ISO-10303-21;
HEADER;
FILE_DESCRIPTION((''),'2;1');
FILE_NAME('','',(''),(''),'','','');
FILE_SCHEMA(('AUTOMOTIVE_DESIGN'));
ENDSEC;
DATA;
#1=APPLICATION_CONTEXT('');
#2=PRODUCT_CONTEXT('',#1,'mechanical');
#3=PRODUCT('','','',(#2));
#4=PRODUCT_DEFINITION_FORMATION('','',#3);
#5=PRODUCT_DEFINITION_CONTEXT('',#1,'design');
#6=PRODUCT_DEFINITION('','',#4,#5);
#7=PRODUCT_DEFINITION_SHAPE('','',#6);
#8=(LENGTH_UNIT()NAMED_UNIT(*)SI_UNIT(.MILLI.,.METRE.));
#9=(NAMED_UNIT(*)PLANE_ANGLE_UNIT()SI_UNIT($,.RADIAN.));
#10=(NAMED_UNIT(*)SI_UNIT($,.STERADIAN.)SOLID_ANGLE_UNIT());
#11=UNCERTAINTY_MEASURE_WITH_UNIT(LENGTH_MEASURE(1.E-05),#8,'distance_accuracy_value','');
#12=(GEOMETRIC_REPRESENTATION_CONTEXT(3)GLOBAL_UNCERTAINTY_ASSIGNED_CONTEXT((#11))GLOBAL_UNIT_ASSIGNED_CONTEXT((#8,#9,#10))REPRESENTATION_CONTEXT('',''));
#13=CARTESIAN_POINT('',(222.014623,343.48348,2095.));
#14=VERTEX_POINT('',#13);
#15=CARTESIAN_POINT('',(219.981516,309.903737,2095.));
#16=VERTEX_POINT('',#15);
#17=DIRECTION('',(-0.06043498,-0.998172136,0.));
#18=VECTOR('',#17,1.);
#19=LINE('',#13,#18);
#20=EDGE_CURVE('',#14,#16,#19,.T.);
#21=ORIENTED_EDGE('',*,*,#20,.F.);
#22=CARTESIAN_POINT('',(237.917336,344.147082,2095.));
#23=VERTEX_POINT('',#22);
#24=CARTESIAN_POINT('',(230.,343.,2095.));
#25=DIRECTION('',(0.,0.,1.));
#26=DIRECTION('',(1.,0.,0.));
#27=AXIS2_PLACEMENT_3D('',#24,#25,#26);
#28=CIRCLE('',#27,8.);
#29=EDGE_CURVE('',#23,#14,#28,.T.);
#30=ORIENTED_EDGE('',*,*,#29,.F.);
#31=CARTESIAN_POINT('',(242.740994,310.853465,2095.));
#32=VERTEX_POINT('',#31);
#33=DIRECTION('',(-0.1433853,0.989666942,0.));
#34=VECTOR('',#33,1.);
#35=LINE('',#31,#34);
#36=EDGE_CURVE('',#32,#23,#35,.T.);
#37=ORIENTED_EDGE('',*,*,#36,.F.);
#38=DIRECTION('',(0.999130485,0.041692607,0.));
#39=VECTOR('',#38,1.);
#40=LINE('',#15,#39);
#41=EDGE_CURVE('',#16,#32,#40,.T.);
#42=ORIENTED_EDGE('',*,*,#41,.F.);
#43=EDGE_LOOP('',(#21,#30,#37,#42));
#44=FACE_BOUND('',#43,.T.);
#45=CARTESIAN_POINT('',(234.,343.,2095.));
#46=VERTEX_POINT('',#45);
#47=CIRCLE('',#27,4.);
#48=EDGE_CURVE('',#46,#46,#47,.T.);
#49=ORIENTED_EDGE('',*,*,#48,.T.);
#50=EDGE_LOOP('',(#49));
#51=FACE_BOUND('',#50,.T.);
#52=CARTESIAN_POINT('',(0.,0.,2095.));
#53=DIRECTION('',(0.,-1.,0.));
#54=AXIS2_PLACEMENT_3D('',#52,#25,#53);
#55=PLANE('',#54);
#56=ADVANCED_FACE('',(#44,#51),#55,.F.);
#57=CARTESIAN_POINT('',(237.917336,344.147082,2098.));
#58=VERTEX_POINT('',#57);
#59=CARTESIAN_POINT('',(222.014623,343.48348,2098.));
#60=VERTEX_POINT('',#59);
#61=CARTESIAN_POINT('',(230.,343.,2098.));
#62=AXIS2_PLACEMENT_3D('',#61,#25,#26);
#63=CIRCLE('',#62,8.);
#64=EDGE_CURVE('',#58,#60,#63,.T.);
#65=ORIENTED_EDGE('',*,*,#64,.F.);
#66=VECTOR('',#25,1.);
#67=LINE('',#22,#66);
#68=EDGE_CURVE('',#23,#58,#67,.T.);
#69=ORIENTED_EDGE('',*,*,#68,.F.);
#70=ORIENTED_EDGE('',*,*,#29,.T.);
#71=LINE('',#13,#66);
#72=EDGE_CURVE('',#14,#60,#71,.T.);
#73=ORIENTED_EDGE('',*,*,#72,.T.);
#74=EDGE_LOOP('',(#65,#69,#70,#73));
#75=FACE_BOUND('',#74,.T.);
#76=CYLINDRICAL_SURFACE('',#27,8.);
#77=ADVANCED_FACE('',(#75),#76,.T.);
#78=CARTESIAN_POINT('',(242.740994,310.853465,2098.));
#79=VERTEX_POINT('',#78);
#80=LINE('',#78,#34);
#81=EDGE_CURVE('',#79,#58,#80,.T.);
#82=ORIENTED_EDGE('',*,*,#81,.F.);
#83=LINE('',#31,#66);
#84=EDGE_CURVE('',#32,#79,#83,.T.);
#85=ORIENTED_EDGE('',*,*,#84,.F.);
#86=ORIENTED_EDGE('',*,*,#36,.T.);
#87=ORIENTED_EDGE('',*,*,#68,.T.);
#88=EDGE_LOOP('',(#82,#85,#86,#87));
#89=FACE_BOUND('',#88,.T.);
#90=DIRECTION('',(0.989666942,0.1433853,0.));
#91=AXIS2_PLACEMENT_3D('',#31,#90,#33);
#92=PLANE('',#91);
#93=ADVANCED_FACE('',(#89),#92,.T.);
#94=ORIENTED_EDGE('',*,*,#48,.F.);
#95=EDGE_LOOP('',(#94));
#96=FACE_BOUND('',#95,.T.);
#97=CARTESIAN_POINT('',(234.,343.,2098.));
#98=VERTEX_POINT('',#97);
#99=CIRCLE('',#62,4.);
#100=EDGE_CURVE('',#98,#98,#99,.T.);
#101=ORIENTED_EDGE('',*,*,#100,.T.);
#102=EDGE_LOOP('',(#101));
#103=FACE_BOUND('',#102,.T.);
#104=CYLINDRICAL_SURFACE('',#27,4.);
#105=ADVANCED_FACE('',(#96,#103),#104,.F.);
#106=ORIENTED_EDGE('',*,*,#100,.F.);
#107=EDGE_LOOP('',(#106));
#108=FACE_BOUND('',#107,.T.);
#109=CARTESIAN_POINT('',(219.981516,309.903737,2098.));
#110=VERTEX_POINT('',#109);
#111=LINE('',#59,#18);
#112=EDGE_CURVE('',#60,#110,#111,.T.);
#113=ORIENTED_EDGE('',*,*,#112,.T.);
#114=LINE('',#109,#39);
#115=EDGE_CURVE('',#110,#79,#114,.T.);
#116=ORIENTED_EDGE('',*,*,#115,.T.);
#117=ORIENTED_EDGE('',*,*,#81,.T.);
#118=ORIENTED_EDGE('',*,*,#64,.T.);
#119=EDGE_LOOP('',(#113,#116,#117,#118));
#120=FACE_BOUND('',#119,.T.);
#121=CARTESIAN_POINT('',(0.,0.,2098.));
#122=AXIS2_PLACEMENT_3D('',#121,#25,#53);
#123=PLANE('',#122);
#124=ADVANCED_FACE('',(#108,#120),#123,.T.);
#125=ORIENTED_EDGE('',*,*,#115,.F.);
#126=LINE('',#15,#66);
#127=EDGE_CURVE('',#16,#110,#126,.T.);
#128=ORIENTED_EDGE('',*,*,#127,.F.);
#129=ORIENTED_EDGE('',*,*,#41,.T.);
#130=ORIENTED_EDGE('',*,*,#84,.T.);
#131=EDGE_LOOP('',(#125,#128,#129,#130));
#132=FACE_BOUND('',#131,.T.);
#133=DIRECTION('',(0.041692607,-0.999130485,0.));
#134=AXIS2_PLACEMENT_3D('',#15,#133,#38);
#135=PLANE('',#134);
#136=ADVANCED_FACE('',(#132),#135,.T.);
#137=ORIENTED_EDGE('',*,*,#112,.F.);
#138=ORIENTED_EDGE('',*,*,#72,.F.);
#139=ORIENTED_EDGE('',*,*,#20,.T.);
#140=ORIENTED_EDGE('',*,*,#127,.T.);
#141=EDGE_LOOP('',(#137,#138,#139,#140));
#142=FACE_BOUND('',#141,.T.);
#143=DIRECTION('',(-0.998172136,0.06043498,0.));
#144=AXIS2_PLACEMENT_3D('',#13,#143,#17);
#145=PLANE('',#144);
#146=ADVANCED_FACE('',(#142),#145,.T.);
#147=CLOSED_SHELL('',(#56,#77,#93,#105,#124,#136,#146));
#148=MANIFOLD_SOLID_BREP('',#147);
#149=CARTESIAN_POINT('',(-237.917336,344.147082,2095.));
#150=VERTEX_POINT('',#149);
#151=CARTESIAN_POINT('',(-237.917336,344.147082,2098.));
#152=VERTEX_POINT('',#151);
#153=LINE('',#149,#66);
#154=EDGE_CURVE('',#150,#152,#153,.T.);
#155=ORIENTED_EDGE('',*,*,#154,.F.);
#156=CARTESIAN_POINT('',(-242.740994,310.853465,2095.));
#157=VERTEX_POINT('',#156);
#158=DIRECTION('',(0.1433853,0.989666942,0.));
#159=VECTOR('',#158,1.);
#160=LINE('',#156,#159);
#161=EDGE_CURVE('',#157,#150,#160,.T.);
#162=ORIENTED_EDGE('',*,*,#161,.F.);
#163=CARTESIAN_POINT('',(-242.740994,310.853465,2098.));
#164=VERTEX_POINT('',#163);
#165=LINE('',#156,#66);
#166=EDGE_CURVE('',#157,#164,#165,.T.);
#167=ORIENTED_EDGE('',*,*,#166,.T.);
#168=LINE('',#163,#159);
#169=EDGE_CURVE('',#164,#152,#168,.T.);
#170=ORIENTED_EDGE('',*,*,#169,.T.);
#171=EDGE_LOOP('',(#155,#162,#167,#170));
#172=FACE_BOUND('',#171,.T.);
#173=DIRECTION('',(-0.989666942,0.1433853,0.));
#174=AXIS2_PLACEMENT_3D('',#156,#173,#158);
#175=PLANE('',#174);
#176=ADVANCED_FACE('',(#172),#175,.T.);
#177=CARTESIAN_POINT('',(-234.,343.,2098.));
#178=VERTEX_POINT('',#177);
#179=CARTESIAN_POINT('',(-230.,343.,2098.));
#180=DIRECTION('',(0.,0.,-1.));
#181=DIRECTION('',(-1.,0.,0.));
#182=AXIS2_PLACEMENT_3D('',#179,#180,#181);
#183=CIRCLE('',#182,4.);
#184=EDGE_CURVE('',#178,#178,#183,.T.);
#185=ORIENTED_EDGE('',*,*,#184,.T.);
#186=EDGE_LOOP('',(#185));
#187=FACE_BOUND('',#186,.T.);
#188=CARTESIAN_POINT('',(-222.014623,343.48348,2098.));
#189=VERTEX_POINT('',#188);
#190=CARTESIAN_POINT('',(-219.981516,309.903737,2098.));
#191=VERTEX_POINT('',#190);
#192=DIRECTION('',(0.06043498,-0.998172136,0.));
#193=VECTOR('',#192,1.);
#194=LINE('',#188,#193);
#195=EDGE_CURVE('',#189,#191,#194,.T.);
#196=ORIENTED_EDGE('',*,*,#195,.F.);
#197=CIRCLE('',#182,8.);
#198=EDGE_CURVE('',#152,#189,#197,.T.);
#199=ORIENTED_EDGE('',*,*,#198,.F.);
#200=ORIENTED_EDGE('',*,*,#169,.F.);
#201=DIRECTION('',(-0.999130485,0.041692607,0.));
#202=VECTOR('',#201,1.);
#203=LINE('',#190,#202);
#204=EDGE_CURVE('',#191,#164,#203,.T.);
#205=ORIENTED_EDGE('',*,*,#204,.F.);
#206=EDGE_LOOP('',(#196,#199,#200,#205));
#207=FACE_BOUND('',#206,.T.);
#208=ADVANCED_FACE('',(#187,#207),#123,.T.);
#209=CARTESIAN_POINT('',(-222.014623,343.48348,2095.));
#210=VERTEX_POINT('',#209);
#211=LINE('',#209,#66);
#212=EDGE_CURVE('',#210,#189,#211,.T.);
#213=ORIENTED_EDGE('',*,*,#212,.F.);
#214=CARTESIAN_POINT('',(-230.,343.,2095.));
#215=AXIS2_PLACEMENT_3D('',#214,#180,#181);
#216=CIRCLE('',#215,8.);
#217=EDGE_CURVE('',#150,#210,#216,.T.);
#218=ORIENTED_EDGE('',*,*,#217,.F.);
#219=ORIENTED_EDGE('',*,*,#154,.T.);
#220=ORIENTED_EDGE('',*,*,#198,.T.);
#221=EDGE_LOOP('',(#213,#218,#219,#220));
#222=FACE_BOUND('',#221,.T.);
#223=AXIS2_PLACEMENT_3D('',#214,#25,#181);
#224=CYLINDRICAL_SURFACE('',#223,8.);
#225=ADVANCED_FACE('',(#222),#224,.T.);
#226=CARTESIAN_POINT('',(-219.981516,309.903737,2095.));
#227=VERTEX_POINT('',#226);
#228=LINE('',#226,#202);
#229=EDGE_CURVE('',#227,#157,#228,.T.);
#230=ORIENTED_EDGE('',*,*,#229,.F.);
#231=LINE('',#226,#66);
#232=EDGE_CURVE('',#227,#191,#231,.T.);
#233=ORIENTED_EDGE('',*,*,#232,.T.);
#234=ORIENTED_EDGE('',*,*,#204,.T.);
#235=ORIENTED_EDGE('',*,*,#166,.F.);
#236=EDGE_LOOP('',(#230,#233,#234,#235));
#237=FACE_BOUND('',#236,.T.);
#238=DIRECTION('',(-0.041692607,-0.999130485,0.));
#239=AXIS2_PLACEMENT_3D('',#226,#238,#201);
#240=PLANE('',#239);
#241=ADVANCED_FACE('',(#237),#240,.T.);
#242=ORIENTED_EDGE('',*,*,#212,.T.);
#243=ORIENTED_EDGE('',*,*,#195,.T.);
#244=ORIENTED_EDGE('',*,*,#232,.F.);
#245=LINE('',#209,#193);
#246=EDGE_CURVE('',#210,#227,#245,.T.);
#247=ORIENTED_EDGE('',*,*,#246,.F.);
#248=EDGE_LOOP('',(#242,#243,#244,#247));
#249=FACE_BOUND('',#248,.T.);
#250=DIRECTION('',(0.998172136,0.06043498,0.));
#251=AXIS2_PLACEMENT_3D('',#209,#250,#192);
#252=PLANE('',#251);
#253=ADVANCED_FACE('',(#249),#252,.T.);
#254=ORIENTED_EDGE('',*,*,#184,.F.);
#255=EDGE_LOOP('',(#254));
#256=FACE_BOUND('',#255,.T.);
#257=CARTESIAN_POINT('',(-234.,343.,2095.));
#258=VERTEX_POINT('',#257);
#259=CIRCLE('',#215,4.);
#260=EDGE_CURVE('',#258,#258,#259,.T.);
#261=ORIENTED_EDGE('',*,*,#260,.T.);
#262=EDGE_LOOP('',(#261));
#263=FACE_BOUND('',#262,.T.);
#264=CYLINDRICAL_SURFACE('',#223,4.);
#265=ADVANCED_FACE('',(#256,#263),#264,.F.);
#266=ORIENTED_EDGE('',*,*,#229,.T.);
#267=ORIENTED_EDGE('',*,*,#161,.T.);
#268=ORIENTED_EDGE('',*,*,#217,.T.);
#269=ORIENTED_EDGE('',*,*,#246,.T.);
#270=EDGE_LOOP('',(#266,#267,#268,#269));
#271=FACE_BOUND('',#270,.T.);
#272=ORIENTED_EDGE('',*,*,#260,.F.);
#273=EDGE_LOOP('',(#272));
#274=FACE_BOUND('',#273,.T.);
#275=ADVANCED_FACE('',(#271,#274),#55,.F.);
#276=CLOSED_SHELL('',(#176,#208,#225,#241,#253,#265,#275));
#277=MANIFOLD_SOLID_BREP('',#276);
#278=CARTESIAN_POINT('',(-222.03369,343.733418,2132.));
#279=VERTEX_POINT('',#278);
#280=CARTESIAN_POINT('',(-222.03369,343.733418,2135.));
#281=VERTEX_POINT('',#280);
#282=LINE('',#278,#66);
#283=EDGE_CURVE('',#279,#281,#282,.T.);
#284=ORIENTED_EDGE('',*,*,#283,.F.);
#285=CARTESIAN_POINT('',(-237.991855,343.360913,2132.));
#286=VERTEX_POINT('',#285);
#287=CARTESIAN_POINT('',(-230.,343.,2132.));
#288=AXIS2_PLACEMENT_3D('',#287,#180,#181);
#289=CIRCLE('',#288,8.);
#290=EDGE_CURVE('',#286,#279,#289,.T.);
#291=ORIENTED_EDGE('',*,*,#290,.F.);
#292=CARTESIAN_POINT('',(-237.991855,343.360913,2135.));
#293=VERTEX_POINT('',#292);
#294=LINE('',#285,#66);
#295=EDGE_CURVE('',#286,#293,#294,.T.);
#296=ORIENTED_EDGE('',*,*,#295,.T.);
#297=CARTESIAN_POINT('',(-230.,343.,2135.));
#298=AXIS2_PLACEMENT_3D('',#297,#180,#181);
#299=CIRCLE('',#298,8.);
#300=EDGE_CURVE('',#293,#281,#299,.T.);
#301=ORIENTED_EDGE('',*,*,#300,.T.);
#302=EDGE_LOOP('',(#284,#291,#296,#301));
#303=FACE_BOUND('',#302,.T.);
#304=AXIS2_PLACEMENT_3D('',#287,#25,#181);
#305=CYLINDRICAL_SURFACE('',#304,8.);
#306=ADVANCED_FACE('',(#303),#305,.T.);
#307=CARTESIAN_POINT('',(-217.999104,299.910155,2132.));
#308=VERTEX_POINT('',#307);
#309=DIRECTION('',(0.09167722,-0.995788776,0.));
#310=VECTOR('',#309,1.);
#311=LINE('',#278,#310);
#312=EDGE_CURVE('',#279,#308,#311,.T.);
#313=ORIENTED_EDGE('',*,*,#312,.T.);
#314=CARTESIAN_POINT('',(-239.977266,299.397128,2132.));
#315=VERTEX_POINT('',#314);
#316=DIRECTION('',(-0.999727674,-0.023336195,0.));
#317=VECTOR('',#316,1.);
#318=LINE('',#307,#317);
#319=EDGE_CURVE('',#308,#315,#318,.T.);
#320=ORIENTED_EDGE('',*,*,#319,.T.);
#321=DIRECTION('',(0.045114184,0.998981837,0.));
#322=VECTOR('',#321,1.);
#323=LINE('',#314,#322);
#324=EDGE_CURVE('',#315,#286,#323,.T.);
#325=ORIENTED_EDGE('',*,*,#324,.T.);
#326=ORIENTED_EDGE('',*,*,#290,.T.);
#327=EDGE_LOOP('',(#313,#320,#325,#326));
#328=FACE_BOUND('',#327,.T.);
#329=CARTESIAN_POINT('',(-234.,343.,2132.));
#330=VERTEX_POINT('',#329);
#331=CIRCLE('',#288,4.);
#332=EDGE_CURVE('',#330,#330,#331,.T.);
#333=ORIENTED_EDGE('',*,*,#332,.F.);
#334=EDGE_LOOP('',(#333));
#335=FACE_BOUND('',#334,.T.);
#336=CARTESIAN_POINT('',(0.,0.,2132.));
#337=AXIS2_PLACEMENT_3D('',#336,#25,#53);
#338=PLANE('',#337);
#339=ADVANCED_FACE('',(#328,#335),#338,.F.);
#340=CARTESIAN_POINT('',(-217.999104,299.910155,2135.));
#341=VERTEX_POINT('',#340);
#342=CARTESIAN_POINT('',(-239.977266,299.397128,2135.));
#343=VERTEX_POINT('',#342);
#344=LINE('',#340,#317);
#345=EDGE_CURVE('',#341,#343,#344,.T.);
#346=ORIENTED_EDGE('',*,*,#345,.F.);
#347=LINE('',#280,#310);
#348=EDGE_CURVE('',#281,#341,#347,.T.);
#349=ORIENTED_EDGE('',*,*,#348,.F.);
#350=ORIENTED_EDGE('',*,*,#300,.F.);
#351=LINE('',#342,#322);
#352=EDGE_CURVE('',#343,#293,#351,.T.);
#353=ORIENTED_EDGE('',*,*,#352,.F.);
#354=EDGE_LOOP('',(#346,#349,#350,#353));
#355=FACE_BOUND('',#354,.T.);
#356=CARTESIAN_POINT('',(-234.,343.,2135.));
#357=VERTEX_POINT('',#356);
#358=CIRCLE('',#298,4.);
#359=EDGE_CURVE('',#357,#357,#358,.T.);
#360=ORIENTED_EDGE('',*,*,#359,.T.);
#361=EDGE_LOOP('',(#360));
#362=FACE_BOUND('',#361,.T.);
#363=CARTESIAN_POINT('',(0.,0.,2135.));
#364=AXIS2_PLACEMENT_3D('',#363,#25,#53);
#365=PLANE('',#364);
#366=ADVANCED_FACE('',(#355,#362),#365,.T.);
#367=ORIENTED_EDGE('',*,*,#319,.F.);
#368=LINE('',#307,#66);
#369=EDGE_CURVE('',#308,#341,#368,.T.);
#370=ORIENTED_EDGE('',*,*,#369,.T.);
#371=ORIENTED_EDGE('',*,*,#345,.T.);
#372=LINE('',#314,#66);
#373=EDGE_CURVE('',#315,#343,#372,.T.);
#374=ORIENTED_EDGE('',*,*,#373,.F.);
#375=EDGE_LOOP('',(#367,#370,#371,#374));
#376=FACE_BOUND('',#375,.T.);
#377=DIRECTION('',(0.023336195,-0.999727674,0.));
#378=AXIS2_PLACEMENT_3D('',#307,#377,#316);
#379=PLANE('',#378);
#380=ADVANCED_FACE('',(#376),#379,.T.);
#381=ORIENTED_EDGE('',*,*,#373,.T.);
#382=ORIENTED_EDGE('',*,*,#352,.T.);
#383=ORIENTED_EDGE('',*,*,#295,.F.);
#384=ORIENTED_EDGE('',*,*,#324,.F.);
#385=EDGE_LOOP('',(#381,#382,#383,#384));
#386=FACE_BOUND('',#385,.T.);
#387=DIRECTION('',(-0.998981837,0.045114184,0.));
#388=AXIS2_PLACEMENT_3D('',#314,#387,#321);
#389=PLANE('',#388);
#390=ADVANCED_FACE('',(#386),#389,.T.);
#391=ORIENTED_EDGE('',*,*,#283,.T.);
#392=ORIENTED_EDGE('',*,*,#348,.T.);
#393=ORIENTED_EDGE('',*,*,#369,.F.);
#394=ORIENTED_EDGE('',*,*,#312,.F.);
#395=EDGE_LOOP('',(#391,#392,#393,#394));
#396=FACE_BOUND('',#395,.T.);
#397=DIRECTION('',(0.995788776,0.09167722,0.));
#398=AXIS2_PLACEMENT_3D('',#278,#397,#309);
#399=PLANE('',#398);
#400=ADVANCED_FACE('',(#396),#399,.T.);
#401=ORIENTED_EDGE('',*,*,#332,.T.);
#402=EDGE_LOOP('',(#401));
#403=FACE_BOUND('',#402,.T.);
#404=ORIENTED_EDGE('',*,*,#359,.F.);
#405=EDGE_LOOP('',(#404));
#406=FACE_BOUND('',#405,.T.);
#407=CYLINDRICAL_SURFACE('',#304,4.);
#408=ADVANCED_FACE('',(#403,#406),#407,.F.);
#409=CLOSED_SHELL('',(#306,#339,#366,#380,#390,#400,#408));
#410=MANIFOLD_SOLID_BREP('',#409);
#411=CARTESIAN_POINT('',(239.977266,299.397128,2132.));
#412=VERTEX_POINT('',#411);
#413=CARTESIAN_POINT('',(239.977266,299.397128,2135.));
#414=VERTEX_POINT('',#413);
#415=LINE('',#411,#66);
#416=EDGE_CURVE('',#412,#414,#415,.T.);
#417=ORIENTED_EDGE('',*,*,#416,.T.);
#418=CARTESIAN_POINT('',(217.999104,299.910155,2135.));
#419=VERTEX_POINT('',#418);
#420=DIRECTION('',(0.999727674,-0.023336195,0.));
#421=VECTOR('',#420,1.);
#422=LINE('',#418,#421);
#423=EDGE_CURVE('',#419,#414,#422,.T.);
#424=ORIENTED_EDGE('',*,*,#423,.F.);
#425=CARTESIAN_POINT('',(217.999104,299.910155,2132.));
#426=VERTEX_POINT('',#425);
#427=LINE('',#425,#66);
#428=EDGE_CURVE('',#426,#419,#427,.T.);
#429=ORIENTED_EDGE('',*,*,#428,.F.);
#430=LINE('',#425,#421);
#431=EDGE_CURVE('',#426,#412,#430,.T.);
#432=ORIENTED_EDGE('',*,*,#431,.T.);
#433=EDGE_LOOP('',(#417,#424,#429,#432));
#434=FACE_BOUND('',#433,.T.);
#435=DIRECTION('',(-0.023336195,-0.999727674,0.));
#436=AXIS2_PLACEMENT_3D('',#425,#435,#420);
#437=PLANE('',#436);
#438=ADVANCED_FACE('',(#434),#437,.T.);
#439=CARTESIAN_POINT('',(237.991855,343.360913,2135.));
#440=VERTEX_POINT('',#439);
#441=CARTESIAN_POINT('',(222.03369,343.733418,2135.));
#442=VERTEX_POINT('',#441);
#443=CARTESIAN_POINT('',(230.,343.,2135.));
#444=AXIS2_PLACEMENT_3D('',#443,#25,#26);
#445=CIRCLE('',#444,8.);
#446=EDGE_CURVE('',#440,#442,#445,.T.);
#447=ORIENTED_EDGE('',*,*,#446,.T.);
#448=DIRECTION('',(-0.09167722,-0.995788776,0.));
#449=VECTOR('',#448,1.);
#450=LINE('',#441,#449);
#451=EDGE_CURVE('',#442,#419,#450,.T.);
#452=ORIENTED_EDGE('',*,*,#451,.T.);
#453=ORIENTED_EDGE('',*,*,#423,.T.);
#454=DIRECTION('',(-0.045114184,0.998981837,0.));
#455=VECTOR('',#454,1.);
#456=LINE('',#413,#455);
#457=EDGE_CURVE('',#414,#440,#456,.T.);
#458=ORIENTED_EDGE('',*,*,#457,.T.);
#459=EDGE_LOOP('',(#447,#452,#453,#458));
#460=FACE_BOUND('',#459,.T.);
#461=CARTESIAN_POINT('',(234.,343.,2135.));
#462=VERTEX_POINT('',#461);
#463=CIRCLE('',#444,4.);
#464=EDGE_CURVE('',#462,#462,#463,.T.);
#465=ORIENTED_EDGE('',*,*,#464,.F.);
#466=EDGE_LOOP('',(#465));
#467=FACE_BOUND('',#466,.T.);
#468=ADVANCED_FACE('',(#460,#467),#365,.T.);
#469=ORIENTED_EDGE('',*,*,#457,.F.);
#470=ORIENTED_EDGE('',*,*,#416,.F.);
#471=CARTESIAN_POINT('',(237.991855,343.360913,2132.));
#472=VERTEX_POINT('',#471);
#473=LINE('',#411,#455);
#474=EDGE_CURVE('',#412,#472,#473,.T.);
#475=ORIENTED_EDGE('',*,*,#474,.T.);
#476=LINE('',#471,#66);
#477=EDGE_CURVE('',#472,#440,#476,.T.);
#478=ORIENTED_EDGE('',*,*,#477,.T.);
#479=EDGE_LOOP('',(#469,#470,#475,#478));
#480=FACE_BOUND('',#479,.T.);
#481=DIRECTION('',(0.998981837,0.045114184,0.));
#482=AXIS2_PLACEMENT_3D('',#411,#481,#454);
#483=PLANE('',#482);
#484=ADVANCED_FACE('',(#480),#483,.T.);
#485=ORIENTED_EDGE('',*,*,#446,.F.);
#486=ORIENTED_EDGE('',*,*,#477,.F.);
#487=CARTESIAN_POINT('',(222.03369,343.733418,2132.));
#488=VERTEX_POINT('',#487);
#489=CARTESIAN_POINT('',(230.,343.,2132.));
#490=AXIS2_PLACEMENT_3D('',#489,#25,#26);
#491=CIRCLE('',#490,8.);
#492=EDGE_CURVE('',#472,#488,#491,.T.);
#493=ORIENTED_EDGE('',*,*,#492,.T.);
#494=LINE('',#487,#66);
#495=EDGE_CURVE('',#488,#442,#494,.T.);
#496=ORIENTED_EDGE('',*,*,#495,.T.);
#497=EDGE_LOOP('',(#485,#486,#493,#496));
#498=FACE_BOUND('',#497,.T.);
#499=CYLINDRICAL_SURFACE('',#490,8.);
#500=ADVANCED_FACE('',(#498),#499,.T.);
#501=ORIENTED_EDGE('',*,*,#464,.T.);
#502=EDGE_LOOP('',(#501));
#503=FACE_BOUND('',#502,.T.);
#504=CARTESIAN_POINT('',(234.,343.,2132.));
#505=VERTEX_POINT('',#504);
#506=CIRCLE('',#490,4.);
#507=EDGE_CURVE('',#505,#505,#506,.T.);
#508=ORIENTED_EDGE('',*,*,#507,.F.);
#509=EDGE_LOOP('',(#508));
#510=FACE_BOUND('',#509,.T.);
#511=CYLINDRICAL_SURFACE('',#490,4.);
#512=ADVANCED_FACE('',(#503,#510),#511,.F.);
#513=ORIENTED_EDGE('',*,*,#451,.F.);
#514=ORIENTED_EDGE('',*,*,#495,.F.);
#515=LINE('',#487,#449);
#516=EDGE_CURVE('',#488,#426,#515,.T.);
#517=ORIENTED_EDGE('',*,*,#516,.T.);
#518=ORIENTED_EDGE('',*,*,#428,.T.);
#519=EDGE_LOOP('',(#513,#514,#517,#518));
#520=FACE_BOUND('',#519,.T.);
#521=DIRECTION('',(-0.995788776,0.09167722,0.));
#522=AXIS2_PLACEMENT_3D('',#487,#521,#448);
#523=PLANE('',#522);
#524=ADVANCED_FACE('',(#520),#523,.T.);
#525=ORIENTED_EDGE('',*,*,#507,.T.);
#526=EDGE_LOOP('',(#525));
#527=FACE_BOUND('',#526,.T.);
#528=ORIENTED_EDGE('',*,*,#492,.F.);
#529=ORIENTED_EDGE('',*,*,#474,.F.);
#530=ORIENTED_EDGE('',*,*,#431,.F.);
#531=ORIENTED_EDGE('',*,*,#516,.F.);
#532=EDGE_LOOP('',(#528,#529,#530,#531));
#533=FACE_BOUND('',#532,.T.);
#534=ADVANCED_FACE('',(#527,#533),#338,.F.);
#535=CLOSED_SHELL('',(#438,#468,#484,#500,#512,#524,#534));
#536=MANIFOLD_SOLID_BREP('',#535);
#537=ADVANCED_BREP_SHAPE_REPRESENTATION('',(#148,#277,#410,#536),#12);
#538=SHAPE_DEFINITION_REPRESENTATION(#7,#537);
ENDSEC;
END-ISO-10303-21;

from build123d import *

# Parameters (mm, degrees)
BOSS_EXTRUDE1_START       = 2132
BOSS_EXTRUDE1_OUTLINE_R   = 4
BOSS_EXTRUDE1_DEPTH       = 3
BOSS_EXTRUDE1_START_2     = 2095
BOSS_EXTRUDE1_2_OUTLINE_R = 4
BOSS_EXTRUDE1_2_DEPTH     = 3


# Read off the part's stored shape, not the designer's step: Boss-Extrude1
with BuildPart() as part:
    # Boss-Extrude1 outline → Boss-Extrude1 (new body)
    with BuildSketch(Plane.XY.offset(BOSS_EXTRUDE1_START)):
        with BuildLine():
            ThreePointArc((237.917335534, 344.147082404), (229.791723167, 350.997288338), (222.033689788, 343.73341776))
            Line((222.033689788, 343.73341776), (217.999104301, 299.910154527))
            Line((217.999104301, 299.910154527), (239.977266453, 299.397128138))
            Line((239.977266453, 299.397128138), (237.991854695, 343.360913469))
            ThreePointArc((237.991854695, 343.360913469), (237.964301528, 343.754917985), (237.917335534, 344.147082404))
        make_face()
        with Locations((230, 343)):
            Circle(BOSS_EXTRUDE1_OUTLINE_R, mode=Mode.SUBTRACT)
    extrude(amount=BOSS_EXTRUDE1_DEPTH)


with BuildPart() as body_2:
    # Boss-Extrude1 2 outline → Boss-Extrude1 2 (new body)
    with BuildSketch(Plane.XY.offset(BOSS_EXTRUDE1_START_2)):
        with BuildLine():
            Line((222.014622911, 343.483479836), (219.981515577, 309.903736695))
            Line((219.981515577, 309.903736695), (242.740994086, 310.853464501))
            Line((242.740994086, 310.853464501), (237.917335534, 344.147082404))
            ThreePointArc((237.917335534, 344.147082404), (229.66645914, 350.993043882), (222.014622911, 343.483479836))
        make_face()
        with Locations((230, 343)):
            Circle(BOSS_EXTRUDE1_2_OUTLINE_R, mode=Mode.SUBTRACT)
    extrude(amount=BOSS_EXTRUDE1_2_DEPTH)


with BuildPart() as body_3:
    # Mirror1: mirrored copy
    add(part.part.mirror(Plane(origin=(0, 0, 0), x_dir=(0, 0, 1), z_dir=(1, 0, 0))))


with BuildPart() as body_4:
    # Mirror1 2: mirrored copy
    add(body_2.part.mirror(Plane(origin=(0, 0, 0), x_dir=(0, 0, 1), z_dir=(1, 0, 0))))


solid = Compound([part.part, body_2.part, body_3.part, body_4.part])
